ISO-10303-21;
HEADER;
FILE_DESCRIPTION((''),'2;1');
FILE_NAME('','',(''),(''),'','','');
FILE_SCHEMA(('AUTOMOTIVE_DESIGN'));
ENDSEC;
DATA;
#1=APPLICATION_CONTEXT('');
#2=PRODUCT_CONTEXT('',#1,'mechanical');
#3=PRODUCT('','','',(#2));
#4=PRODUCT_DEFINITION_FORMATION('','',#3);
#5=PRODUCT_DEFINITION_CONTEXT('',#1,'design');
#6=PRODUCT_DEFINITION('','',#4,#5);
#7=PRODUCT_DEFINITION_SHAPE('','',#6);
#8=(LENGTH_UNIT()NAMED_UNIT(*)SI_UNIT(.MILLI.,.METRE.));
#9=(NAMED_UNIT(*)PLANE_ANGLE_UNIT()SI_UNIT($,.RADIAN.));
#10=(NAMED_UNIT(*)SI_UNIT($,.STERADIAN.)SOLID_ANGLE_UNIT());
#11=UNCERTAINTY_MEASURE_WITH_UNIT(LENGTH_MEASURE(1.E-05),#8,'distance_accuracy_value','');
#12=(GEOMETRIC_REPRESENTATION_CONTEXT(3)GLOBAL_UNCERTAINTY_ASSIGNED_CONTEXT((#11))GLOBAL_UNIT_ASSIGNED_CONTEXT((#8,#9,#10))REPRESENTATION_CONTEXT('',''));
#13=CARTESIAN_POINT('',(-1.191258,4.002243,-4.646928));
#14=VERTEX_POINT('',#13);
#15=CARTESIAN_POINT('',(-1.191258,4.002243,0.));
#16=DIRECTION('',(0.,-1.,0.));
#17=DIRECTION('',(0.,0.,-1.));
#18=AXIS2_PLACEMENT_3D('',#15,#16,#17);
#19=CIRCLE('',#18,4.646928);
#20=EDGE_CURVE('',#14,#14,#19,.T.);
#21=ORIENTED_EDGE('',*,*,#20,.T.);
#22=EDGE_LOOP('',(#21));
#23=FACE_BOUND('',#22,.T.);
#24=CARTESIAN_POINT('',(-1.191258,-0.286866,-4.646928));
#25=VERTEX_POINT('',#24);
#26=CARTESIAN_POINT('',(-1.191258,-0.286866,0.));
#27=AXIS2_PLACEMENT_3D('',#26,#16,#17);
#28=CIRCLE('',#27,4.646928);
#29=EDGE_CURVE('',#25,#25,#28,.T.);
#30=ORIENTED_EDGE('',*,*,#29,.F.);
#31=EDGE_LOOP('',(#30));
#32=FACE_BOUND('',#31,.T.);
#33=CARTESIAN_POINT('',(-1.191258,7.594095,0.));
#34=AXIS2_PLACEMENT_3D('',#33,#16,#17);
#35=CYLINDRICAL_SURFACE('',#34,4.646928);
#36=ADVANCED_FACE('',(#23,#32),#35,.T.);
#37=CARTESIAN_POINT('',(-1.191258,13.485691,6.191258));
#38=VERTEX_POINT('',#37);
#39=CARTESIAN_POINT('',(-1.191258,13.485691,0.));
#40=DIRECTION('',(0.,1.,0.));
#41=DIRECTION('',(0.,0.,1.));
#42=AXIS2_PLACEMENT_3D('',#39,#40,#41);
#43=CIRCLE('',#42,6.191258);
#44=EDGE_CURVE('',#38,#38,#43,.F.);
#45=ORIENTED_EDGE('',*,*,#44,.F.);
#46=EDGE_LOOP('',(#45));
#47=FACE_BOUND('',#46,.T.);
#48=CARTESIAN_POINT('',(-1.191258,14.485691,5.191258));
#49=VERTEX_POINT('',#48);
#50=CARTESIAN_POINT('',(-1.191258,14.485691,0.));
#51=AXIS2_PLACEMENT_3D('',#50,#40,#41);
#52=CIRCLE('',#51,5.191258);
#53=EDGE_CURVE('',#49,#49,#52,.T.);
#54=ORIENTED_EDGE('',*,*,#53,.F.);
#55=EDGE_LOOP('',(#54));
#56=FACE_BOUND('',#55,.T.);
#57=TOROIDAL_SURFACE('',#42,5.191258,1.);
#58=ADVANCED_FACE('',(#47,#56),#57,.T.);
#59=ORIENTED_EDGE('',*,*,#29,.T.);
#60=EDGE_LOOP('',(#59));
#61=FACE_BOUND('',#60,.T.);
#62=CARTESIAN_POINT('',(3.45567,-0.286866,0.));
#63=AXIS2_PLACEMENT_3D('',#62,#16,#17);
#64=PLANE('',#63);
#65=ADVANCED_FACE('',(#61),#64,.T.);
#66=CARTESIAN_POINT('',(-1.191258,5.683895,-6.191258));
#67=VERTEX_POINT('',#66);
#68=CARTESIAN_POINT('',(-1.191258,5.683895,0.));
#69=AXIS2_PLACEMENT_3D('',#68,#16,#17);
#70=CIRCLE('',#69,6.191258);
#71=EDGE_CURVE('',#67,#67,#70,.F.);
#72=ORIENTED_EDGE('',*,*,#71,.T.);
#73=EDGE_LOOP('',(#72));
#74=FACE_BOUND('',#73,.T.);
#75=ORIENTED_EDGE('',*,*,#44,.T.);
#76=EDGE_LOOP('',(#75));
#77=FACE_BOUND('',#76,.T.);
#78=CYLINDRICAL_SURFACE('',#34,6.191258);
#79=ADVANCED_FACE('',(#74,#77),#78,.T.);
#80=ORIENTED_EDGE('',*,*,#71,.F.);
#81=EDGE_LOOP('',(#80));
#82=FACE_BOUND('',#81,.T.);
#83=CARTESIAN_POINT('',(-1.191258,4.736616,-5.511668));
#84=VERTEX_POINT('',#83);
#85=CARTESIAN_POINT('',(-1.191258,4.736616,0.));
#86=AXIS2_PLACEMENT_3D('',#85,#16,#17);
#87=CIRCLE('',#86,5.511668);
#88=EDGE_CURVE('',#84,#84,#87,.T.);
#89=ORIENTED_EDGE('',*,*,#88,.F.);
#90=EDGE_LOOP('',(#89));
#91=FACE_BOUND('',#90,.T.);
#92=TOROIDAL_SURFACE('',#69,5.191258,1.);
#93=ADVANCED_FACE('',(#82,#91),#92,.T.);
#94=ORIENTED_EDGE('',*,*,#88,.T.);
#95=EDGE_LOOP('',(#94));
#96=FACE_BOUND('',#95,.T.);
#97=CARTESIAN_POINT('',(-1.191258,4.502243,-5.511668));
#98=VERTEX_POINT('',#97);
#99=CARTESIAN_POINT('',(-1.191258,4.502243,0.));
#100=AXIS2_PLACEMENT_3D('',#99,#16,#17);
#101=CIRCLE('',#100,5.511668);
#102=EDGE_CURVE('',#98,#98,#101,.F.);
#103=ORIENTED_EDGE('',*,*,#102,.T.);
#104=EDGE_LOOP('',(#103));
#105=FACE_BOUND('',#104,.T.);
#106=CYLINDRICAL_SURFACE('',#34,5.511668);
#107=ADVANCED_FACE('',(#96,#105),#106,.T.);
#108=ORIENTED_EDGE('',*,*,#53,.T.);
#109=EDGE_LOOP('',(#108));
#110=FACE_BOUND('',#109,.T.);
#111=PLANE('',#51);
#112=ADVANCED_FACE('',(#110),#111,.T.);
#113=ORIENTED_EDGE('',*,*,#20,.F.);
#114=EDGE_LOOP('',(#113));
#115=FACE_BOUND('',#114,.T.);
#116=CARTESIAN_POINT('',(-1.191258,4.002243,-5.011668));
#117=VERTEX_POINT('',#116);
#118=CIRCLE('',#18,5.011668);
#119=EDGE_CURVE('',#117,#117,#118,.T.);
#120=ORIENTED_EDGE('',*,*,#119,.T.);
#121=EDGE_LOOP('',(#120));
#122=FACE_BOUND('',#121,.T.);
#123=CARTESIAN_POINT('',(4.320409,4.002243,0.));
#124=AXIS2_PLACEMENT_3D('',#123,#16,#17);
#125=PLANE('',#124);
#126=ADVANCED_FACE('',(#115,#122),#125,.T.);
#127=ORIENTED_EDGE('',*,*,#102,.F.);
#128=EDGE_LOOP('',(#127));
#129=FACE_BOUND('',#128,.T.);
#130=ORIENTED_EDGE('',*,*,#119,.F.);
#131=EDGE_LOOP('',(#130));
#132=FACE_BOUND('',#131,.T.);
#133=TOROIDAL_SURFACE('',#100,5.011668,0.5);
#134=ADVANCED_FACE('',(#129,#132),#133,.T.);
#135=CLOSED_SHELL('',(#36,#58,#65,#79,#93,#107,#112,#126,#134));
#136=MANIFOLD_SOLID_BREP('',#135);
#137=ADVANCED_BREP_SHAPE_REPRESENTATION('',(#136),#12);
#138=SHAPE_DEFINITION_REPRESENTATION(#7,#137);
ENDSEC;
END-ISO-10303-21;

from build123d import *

# Parameters (mm, degrees)
FILLET_2_R = 1
FILLET_3_R = 1
FILLET_4_R = 0.5


with BuildPart() as part:
    # 草图1 → 旋转1 (revolve)
    with BuildSketch(Plane.XY, mode=Mode.PRIVATE) as revolve_1_sk:
        Polygon((-1.191258072, 14.485690889), (5, 14.485690889), (5, 4.736615531), (4.320409463, 4.736615531), (4.320409463, 4.0022434), (3.455669657, 4.0022434), (3.455669657, -0.286866039), (-1.191258072, -0.286866039), (-1.191258072, 4.0022434), (-1.191258072, 7.594094591), align=None)
    revolve(revolve_1_sk.sketch.rotate(Axis((-1.191258072, 7.594094591, 0), (0, 1, 0)), 90), axis=Axis((-1.191258072, 7.594094591, 0), (0, 1, 0)))

    # 圆角2
    fillet_2_edges = [part.edges().sort_by_distance(p)[0] for p in [
        (-1.191258072, 14.485690889, 6.191258072),
    ]]
    fillet(fillet_2_edges, radius=FILLET_2_R)

    # 圆角3
    # the kernel refuses this fillet: 1 mm, written as the material it takes off along each edge
    with BuildSketch(Plane(origin=(-1.191258072, 4.736615531, 0), x_dir=(0, 0, -1), z_dir=(1, 0, 0))) as fillet_3_piece_1:
        with BuildLine():
            CenterArc((5.191258072, 0.947279144), FILLET_3_R, 288.687689278, 71.312310722)
            Line((5.511667536, 0), (5.518075725, -0.018945583))
            ThreePointArc((5.518075725, -0.018945583), (5.851462804, -0.02), (6.191258072, -0.02))
            Line((6.191258072, -0.02), (6.211258072, 0))
            Line((6.211258072, 0), (6.211258072, 0.947279144))
            Line((6.211258072, 0.947279144), (6.191258072, 0.947279144))
        make_face()
    revolve(axis=Axis((-1.191258072, 4.736615531, 0), (0, 1, 0)), mode=Mode.SUBTRACT)

    # 圆角4
    fillet_4_edges = [part.edges().sort_by_distance(p)[0] for p in [
        (-1.191258072, 4.0022434, 5.511667536),
    ]]
    fillet(fillet_4_edges, radius=FILLET_4_R)


solid = part.part
